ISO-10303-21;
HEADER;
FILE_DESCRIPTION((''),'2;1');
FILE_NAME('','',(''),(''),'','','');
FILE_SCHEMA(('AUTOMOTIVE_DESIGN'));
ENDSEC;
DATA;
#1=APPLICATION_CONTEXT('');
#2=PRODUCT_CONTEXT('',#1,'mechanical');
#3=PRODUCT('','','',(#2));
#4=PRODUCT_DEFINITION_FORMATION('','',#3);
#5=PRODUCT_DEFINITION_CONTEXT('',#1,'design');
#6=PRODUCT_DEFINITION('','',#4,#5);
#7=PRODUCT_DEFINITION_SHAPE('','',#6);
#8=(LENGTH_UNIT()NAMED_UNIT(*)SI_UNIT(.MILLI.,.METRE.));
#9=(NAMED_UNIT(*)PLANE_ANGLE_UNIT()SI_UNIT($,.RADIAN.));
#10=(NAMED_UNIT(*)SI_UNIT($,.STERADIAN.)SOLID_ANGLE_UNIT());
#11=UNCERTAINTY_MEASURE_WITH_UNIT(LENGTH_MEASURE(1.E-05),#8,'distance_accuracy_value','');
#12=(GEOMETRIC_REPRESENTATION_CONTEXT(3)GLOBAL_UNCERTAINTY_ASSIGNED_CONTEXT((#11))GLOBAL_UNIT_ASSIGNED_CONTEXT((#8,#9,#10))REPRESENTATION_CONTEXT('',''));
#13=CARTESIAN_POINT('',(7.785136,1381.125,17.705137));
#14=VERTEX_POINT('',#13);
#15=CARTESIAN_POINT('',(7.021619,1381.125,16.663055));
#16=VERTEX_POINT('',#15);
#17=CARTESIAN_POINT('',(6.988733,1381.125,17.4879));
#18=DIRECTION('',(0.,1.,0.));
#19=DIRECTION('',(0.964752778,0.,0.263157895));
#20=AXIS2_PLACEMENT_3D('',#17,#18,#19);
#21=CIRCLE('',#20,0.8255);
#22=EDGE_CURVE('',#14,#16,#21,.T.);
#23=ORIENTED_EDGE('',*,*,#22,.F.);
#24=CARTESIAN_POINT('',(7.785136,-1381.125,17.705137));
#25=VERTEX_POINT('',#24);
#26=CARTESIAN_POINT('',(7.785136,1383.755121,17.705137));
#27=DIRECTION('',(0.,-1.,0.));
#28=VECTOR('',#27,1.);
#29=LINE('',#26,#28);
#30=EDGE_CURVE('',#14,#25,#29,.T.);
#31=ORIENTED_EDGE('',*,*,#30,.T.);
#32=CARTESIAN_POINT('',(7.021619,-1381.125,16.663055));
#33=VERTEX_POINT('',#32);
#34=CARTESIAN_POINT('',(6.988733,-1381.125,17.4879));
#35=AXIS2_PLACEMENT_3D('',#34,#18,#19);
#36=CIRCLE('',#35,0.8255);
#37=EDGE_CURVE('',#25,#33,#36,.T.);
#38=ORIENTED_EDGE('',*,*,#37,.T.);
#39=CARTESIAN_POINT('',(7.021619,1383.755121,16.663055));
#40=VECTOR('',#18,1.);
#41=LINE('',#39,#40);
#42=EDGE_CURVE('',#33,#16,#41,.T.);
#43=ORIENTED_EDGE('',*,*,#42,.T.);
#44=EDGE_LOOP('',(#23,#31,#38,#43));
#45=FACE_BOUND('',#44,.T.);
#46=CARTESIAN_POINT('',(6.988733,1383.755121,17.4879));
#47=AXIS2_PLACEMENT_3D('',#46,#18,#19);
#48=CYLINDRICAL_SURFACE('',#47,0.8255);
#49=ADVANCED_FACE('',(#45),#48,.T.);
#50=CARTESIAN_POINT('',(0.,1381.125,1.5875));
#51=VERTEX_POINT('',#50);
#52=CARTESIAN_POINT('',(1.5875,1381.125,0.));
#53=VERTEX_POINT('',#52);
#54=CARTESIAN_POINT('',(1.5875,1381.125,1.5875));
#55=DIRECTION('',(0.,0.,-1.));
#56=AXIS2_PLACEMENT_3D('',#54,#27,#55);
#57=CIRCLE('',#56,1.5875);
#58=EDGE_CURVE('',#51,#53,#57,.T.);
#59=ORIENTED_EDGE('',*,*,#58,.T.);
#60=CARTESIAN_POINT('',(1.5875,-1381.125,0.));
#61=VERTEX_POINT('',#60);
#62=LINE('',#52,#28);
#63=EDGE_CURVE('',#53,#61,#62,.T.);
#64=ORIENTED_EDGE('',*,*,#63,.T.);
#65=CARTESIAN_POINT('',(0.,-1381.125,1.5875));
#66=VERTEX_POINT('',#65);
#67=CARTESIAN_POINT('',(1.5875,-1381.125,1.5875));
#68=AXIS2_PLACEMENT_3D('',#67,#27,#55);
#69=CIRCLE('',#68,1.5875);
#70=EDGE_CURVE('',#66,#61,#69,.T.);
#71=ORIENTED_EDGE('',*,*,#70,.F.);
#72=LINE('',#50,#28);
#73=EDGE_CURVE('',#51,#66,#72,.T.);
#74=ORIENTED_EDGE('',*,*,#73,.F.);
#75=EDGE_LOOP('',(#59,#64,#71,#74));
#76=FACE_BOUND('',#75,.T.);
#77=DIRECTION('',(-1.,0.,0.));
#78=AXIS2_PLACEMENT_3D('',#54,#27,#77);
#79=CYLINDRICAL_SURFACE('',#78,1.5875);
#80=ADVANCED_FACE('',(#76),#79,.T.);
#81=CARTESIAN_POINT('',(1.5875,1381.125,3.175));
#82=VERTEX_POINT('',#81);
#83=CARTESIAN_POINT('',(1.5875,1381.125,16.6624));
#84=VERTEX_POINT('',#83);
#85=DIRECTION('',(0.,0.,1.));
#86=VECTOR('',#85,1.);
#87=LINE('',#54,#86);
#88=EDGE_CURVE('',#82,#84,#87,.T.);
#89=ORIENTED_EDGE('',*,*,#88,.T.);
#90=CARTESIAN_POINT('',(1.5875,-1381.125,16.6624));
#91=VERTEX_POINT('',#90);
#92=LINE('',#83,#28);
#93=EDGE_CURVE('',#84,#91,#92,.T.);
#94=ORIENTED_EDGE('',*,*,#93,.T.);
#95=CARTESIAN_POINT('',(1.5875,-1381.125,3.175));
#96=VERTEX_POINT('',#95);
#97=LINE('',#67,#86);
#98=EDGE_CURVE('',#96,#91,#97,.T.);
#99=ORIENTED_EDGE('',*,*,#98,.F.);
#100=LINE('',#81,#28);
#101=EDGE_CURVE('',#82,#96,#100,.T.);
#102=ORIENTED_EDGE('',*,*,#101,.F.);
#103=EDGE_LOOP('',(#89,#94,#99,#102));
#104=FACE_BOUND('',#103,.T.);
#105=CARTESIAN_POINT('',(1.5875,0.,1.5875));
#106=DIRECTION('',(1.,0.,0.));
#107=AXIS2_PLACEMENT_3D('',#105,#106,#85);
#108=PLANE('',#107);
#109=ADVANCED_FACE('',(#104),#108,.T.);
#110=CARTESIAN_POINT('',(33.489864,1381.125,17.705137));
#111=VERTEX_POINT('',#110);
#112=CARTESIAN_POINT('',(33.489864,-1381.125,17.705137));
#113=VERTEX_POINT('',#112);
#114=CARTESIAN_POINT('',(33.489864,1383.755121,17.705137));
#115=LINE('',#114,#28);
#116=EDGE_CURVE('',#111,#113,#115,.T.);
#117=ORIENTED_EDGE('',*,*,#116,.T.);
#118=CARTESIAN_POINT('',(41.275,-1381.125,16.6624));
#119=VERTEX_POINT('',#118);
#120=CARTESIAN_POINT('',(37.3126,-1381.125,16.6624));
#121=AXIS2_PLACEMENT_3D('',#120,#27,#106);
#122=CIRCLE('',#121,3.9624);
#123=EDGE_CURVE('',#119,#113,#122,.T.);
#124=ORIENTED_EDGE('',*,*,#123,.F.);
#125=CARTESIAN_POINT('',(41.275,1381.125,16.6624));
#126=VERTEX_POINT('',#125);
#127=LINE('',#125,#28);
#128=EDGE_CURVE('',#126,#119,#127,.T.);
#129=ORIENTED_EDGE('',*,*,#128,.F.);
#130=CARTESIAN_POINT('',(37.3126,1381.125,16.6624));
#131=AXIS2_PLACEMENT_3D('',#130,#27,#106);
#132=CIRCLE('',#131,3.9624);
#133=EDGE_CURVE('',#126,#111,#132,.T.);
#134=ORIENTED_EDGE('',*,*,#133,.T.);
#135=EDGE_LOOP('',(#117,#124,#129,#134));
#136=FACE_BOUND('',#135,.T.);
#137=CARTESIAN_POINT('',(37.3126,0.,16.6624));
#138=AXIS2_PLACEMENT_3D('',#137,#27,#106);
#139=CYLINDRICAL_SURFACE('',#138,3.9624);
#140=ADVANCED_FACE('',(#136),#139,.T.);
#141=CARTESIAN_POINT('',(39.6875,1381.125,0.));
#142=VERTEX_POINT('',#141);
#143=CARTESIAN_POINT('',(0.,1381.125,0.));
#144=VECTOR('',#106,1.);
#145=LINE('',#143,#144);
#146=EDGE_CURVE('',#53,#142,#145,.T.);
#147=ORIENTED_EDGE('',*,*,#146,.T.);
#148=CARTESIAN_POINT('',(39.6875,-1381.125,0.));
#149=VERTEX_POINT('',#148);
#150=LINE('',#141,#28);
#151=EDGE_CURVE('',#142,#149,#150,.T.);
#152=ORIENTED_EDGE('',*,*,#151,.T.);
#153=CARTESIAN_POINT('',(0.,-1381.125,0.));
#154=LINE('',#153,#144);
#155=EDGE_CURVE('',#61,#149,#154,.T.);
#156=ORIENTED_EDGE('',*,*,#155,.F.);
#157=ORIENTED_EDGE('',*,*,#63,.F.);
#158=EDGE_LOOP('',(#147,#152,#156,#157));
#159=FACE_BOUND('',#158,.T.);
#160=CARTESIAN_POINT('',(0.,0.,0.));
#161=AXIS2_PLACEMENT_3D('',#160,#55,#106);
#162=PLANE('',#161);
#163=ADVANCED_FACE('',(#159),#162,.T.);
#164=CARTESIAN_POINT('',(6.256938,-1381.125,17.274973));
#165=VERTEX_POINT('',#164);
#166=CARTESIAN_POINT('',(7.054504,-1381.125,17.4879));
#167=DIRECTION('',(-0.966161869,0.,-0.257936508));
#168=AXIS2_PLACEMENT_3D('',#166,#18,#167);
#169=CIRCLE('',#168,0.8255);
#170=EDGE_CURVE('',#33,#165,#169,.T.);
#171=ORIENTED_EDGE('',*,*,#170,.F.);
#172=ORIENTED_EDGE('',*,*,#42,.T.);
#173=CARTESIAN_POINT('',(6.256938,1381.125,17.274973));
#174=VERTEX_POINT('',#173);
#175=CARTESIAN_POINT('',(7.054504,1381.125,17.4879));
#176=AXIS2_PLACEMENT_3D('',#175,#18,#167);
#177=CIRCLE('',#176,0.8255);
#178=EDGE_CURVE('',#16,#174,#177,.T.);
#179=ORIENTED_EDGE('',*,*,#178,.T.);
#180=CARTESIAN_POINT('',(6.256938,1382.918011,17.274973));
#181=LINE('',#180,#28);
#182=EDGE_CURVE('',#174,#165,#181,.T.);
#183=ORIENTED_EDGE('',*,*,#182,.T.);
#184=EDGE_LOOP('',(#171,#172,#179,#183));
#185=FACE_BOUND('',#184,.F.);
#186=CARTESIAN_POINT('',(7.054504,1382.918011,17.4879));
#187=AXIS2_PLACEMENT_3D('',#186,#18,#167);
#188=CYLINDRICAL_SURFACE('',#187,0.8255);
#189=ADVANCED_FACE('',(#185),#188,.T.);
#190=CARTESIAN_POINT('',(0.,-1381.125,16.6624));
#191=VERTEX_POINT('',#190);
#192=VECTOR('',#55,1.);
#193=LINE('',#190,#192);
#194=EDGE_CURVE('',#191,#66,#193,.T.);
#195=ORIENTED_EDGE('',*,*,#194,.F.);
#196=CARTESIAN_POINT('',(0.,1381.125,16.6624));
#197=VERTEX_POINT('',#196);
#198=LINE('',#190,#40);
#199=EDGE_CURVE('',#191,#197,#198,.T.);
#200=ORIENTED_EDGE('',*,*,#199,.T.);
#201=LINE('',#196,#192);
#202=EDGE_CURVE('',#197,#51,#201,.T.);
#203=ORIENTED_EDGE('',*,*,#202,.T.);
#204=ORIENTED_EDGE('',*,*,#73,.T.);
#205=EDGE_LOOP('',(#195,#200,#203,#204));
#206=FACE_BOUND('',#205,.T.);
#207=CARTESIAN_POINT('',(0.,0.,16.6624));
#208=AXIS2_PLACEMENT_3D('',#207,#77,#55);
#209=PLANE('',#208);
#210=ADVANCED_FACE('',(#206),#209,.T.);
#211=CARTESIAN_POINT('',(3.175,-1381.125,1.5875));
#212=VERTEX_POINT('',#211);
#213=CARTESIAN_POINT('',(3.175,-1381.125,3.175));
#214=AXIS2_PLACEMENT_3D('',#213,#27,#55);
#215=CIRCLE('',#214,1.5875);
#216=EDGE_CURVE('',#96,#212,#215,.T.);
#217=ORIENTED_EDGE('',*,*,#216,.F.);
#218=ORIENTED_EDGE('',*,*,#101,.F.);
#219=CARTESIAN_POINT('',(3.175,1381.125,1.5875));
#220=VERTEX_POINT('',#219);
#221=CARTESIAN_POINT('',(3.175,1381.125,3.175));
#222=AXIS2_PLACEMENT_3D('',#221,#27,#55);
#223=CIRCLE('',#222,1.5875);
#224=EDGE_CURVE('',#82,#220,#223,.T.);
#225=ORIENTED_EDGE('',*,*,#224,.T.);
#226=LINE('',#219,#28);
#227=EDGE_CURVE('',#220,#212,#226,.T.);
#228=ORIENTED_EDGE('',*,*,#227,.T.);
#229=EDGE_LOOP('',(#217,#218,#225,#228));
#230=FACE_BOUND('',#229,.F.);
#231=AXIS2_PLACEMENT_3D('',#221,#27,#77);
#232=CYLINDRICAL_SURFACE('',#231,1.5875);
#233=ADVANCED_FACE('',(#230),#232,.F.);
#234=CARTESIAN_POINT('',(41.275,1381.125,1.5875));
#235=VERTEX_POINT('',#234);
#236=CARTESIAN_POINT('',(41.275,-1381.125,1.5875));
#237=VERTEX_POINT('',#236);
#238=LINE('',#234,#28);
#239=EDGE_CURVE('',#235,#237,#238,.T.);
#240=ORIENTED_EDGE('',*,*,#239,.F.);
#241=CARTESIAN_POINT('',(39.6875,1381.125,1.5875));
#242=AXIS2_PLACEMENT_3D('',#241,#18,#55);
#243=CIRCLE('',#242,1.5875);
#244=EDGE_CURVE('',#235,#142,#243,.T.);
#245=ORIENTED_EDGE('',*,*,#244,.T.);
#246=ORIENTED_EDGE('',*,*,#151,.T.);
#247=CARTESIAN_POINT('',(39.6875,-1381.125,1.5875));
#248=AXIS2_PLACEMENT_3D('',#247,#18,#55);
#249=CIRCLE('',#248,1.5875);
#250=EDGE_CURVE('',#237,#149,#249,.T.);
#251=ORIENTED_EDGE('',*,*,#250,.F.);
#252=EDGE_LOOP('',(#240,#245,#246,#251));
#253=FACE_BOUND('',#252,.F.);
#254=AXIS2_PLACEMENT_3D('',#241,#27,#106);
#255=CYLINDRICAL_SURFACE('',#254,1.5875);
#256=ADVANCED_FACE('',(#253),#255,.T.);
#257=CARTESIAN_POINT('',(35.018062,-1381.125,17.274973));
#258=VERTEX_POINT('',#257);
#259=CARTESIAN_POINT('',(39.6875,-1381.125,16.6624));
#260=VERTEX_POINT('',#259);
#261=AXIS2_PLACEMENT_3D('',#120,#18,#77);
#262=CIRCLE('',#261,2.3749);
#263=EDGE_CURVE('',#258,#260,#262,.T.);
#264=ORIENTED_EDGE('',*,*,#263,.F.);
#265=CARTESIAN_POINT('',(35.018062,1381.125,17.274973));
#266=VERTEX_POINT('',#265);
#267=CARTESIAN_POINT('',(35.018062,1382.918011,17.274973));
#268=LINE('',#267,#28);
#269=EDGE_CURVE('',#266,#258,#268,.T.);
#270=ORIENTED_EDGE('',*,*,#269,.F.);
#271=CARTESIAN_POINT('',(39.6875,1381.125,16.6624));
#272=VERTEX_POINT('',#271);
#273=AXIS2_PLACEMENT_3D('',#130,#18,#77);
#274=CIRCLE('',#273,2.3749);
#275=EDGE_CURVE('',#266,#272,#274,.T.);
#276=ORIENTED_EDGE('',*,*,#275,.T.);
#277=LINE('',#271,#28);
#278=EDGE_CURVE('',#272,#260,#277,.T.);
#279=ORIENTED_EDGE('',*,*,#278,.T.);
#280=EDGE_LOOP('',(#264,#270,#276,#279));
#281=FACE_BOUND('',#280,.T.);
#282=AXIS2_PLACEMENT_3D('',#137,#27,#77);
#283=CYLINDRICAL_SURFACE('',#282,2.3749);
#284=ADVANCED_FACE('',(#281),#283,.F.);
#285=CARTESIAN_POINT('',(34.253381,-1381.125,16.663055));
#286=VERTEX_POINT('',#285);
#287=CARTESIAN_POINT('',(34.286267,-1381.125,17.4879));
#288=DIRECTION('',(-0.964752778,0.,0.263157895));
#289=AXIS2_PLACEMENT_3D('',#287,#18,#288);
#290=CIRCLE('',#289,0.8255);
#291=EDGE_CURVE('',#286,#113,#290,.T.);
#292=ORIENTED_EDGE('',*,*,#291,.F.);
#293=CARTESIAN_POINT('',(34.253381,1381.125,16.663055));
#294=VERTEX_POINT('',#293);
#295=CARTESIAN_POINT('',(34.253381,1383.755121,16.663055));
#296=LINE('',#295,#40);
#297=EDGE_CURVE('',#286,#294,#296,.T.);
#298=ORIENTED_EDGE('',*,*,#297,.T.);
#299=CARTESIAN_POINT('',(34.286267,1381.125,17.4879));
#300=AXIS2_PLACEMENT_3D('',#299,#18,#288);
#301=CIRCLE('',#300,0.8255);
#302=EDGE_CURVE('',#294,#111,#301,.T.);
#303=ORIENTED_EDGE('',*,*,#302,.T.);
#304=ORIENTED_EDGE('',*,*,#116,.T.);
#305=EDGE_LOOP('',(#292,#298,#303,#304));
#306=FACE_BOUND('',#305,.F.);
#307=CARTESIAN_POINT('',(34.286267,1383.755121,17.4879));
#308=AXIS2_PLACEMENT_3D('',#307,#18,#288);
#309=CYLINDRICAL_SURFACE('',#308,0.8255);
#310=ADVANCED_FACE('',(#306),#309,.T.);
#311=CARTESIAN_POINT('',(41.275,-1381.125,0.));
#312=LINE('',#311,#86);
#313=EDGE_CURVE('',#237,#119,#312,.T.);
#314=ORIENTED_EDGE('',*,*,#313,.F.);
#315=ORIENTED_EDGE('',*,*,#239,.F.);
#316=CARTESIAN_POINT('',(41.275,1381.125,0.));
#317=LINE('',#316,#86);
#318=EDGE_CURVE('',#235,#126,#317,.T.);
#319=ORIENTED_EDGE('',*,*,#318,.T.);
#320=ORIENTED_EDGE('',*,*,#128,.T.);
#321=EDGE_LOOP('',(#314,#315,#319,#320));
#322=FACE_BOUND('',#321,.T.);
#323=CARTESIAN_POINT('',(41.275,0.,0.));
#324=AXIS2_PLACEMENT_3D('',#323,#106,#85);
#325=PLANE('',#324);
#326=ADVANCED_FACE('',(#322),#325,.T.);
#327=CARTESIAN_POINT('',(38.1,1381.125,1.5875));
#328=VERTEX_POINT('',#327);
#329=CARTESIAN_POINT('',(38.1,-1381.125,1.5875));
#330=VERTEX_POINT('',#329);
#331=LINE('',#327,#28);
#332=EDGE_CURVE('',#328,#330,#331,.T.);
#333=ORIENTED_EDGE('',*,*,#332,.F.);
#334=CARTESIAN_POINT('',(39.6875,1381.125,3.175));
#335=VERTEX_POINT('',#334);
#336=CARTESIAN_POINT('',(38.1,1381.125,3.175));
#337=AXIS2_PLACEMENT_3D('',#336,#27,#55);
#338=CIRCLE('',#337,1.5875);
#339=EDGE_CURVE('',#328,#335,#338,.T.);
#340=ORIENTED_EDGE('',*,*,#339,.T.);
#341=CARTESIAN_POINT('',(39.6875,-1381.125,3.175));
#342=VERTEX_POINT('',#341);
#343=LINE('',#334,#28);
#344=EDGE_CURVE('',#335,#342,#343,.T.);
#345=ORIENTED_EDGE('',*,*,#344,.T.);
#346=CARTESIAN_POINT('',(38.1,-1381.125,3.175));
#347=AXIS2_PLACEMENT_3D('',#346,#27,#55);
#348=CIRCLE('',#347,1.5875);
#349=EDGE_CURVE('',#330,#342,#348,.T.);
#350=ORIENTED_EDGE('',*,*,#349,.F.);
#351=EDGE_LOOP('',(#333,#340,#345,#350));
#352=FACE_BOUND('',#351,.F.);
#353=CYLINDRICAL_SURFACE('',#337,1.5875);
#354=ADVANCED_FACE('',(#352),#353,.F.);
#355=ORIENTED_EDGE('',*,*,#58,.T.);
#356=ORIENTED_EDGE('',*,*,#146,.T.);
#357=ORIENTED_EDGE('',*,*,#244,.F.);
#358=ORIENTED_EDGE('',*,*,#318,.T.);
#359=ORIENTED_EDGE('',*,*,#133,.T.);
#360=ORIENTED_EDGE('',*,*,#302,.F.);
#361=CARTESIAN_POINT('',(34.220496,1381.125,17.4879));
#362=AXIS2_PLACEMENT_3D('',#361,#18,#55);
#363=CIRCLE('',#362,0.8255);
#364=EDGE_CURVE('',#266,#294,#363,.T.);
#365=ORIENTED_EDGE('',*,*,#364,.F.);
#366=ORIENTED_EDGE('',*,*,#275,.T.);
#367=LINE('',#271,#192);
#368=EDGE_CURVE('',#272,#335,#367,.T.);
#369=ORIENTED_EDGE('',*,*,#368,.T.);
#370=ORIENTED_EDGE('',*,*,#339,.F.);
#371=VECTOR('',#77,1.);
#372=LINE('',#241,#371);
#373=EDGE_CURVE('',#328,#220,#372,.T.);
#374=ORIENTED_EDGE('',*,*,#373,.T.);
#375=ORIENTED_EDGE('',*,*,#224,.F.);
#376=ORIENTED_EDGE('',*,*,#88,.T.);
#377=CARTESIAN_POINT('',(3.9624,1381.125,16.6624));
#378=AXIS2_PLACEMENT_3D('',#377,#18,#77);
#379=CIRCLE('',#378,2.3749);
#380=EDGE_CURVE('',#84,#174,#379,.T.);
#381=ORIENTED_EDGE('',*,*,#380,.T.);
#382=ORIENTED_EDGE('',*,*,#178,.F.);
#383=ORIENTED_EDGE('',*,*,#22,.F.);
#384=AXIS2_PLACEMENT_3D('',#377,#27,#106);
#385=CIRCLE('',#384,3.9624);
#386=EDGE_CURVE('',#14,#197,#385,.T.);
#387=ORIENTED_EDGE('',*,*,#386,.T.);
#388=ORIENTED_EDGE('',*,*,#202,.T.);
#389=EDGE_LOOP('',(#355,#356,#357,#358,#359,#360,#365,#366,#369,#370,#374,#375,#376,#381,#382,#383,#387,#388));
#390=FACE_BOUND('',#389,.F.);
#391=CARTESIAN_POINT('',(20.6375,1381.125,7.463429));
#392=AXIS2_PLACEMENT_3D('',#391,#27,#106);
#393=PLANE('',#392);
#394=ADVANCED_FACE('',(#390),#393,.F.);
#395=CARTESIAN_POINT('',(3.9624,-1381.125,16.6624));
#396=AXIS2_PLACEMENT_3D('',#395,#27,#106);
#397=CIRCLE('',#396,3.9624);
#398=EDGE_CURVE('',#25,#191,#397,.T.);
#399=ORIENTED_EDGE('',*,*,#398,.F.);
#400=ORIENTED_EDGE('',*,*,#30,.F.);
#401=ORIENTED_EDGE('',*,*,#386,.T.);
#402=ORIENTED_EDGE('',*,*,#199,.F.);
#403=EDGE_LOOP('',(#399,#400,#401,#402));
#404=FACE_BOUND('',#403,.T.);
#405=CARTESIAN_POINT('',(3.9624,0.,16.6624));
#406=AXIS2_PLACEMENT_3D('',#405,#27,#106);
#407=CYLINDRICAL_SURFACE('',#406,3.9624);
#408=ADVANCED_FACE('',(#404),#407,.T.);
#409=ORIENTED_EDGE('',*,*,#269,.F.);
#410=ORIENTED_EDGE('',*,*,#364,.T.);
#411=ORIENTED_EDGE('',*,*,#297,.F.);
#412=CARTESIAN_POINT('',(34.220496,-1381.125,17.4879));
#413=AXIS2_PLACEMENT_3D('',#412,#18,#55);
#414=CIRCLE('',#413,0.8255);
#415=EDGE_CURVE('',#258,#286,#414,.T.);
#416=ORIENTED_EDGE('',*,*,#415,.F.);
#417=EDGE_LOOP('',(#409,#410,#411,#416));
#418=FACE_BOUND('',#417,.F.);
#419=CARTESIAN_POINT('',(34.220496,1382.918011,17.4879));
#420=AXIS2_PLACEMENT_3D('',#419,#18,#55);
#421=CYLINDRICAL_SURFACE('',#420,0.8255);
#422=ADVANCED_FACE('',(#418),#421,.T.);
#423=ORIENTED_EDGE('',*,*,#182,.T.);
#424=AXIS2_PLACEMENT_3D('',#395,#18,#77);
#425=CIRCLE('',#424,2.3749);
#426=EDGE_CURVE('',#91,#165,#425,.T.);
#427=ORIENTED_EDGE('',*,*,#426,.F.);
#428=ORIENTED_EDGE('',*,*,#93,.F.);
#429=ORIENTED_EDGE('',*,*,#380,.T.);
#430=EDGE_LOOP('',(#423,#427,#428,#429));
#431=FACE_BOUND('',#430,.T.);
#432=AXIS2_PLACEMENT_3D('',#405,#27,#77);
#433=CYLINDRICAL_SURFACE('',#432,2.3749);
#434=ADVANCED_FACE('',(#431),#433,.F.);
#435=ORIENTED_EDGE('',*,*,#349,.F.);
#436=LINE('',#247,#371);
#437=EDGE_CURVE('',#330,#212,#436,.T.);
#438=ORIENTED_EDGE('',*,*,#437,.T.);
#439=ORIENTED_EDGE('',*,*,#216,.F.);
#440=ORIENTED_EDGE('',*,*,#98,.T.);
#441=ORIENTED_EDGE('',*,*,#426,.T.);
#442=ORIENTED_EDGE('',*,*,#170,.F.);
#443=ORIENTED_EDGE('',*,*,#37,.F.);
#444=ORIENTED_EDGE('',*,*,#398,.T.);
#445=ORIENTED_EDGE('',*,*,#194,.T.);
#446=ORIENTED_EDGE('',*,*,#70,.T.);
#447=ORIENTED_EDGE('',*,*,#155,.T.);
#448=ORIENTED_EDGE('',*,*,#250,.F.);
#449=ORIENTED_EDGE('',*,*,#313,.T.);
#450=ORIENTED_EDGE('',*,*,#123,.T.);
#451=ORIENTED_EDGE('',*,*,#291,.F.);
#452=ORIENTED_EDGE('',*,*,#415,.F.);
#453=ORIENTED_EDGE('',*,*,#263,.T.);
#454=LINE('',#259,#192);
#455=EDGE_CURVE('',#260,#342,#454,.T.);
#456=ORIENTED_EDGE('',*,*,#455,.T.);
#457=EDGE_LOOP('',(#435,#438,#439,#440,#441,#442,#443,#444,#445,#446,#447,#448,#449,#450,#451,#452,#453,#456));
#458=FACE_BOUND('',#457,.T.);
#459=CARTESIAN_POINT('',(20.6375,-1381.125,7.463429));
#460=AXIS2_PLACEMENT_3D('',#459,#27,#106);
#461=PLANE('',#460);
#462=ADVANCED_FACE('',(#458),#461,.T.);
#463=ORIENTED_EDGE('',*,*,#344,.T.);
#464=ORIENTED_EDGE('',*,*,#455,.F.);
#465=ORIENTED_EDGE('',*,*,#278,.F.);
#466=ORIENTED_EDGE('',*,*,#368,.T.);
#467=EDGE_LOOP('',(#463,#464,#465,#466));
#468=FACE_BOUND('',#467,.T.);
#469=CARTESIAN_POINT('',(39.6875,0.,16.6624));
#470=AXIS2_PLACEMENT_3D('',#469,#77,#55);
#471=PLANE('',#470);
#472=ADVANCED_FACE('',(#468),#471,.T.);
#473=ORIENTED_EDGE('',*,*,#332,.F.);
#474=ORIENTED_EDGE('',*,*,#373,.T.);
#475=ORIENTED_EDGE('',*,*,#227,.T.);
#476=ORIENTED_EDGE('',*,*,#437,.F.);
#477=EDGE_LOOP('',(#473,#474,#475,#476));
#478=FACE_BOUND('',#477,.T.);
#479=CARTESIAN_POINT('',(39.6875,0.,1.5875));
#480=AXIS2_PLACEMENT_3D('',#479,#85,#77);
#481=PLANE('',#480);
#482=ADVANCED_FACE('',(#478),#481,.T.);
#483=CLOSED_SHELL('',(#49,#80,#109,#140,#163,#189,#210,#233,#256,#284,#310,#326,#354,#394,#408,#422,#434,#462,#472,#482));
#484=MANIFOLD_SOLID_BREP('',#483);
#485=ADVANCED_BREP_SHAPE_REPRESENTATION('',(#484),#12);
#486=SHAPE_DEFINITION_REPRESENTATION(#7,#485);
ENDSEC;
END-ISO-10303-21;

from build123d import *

# Parameters (mm, degrees)
F1_DEPTH    = 1381.125
F2_R        = 1.5875
F3_T1_DEPTH = 2767.5102424874
F3_T3_DEPTH = 2765.8360222341


# Not quite as in the source:
# - a fillet or chamfer that OpenCascade refuses, or shapes differently, is made with other operations: its cross-section is extruded or revolved along the edge and cut away or added


with BuildPart() as f1:
    # F0 (on Front) → F1 (new body, symmetric)
    with BuildSketch(Plane.XZ):
        with BuildLine():
            Line((0, 16.6624), (0, 0))
            Line((0, 0), (41.275, 0))
            Line((41.275, 0), (41.275, 16.6624))
            ThreePointArc((41.275, 16.6624), (37.3126, 20.6248), (33.3502, 16.6624))
            Line((33.3502, 16.6624), (34.9377, 16.6624))
            ThreePointArc((34.9377, 16.6624), (37.3126, 19.0373), (39.6875, 16.6624))
            Line((39.6875, 16.6624), (39.6875, 1.5875))
            Line((39.6875, 1.5875), (1.5875, 1.5875))
            Line((1.5875, 1.5875), (1.5875, 16.6624))
            ThreePointArc((1.5875, 16.6624), (3.9624, 19.0373), (6.3373, 16.6624))
            Line((6.3373, 16.6624), (7.9248, 16.6624))
            ThreePointArc((7.9248, 16.6624), (3.9624, 20.6248), (0, 16.6624))
        make_face()
    extrude(amount=F1_DEPTH, both=True)

    # F2
    f2_edges = [f1.edges().sort_by_distance(p)[0] for p in [
        (41.275, 0, 0),
        (0, 0, 0),
        (39.6875, 0, 1.5875),
        (1.5875, 0, 1.5875),
    ]]
    fillet(f2_edges, radius=F2_R)

    # F3: fillet of radius 0.8255 on 4 edges, made by hand

    # F3_s2 → F3_t1 (cut)
    with BuildSketch(Plane.XZ.offset(-1383.7551212437)):
        with BuildLine():
            ThreePointArc((7.7851364071, 17.7051368421), (7.6447738654, 16.9868405041), (6.9887329889, 16.6624))
            Line((6.9887329889, 16.6624), (7.9248, 16.6624))
            ThreePointArc((7.9248, 16.6624), (7.889728895, 17.1884242487), (7.7851364071, 17.7051368421))
        make_face()
        with BuildLine():
            ThreePointArc((33.4898635929, 17.7051368421), (33.6302261346, 16.9868405041), (34.2862670111, 16.6624))
            Line((34.2862670111, 16.6624), (33.3502, 16.6624))
            ThreePointArc((33.3502, 16.6624), (33.385271105, 17.1884242487), (33.4898635929, 17.7051368421))
        make_face()
    extrude(amount=F3_T1_DEPTH, mode=Mode.SUBTRACT)

    # F3_s4 → F3_t3 (cut)
    with BuildSketch(Plane.XZ.offset(-1382.918011117)):
        with BuildLine():
            ThreePointArc((6.2569378236, 17.2749734127), (6.551672789, 16.8332164322), (7.0545044468, 16.6624))
            Line((7.0545044468, 16.6624), (6.3373, 16.6624))
            ThreePointArc((6.3373, 16.6624), (6.317123751, 16.9713110978), (6.2569378236, 17.2749734127))
        make_face()
        with BuildLine():
            ThreePointArc((34.2204955532, 16.6624), (34.723327211, 16.8332164322), (35.0180621764, 17.2749734127))
            ThreePointArc((35.0180621764, 17.2749734127), (34.957876249, 16.9713110978), (34.9377, 16.6624))
            Line((34.9377, 16.6624), (34.2204955532, 16.6624))
        make_face()
    extrude(amount=F3_T3_DEPTH, mode=Mode.SUBTRACT)


solid = f1.part
